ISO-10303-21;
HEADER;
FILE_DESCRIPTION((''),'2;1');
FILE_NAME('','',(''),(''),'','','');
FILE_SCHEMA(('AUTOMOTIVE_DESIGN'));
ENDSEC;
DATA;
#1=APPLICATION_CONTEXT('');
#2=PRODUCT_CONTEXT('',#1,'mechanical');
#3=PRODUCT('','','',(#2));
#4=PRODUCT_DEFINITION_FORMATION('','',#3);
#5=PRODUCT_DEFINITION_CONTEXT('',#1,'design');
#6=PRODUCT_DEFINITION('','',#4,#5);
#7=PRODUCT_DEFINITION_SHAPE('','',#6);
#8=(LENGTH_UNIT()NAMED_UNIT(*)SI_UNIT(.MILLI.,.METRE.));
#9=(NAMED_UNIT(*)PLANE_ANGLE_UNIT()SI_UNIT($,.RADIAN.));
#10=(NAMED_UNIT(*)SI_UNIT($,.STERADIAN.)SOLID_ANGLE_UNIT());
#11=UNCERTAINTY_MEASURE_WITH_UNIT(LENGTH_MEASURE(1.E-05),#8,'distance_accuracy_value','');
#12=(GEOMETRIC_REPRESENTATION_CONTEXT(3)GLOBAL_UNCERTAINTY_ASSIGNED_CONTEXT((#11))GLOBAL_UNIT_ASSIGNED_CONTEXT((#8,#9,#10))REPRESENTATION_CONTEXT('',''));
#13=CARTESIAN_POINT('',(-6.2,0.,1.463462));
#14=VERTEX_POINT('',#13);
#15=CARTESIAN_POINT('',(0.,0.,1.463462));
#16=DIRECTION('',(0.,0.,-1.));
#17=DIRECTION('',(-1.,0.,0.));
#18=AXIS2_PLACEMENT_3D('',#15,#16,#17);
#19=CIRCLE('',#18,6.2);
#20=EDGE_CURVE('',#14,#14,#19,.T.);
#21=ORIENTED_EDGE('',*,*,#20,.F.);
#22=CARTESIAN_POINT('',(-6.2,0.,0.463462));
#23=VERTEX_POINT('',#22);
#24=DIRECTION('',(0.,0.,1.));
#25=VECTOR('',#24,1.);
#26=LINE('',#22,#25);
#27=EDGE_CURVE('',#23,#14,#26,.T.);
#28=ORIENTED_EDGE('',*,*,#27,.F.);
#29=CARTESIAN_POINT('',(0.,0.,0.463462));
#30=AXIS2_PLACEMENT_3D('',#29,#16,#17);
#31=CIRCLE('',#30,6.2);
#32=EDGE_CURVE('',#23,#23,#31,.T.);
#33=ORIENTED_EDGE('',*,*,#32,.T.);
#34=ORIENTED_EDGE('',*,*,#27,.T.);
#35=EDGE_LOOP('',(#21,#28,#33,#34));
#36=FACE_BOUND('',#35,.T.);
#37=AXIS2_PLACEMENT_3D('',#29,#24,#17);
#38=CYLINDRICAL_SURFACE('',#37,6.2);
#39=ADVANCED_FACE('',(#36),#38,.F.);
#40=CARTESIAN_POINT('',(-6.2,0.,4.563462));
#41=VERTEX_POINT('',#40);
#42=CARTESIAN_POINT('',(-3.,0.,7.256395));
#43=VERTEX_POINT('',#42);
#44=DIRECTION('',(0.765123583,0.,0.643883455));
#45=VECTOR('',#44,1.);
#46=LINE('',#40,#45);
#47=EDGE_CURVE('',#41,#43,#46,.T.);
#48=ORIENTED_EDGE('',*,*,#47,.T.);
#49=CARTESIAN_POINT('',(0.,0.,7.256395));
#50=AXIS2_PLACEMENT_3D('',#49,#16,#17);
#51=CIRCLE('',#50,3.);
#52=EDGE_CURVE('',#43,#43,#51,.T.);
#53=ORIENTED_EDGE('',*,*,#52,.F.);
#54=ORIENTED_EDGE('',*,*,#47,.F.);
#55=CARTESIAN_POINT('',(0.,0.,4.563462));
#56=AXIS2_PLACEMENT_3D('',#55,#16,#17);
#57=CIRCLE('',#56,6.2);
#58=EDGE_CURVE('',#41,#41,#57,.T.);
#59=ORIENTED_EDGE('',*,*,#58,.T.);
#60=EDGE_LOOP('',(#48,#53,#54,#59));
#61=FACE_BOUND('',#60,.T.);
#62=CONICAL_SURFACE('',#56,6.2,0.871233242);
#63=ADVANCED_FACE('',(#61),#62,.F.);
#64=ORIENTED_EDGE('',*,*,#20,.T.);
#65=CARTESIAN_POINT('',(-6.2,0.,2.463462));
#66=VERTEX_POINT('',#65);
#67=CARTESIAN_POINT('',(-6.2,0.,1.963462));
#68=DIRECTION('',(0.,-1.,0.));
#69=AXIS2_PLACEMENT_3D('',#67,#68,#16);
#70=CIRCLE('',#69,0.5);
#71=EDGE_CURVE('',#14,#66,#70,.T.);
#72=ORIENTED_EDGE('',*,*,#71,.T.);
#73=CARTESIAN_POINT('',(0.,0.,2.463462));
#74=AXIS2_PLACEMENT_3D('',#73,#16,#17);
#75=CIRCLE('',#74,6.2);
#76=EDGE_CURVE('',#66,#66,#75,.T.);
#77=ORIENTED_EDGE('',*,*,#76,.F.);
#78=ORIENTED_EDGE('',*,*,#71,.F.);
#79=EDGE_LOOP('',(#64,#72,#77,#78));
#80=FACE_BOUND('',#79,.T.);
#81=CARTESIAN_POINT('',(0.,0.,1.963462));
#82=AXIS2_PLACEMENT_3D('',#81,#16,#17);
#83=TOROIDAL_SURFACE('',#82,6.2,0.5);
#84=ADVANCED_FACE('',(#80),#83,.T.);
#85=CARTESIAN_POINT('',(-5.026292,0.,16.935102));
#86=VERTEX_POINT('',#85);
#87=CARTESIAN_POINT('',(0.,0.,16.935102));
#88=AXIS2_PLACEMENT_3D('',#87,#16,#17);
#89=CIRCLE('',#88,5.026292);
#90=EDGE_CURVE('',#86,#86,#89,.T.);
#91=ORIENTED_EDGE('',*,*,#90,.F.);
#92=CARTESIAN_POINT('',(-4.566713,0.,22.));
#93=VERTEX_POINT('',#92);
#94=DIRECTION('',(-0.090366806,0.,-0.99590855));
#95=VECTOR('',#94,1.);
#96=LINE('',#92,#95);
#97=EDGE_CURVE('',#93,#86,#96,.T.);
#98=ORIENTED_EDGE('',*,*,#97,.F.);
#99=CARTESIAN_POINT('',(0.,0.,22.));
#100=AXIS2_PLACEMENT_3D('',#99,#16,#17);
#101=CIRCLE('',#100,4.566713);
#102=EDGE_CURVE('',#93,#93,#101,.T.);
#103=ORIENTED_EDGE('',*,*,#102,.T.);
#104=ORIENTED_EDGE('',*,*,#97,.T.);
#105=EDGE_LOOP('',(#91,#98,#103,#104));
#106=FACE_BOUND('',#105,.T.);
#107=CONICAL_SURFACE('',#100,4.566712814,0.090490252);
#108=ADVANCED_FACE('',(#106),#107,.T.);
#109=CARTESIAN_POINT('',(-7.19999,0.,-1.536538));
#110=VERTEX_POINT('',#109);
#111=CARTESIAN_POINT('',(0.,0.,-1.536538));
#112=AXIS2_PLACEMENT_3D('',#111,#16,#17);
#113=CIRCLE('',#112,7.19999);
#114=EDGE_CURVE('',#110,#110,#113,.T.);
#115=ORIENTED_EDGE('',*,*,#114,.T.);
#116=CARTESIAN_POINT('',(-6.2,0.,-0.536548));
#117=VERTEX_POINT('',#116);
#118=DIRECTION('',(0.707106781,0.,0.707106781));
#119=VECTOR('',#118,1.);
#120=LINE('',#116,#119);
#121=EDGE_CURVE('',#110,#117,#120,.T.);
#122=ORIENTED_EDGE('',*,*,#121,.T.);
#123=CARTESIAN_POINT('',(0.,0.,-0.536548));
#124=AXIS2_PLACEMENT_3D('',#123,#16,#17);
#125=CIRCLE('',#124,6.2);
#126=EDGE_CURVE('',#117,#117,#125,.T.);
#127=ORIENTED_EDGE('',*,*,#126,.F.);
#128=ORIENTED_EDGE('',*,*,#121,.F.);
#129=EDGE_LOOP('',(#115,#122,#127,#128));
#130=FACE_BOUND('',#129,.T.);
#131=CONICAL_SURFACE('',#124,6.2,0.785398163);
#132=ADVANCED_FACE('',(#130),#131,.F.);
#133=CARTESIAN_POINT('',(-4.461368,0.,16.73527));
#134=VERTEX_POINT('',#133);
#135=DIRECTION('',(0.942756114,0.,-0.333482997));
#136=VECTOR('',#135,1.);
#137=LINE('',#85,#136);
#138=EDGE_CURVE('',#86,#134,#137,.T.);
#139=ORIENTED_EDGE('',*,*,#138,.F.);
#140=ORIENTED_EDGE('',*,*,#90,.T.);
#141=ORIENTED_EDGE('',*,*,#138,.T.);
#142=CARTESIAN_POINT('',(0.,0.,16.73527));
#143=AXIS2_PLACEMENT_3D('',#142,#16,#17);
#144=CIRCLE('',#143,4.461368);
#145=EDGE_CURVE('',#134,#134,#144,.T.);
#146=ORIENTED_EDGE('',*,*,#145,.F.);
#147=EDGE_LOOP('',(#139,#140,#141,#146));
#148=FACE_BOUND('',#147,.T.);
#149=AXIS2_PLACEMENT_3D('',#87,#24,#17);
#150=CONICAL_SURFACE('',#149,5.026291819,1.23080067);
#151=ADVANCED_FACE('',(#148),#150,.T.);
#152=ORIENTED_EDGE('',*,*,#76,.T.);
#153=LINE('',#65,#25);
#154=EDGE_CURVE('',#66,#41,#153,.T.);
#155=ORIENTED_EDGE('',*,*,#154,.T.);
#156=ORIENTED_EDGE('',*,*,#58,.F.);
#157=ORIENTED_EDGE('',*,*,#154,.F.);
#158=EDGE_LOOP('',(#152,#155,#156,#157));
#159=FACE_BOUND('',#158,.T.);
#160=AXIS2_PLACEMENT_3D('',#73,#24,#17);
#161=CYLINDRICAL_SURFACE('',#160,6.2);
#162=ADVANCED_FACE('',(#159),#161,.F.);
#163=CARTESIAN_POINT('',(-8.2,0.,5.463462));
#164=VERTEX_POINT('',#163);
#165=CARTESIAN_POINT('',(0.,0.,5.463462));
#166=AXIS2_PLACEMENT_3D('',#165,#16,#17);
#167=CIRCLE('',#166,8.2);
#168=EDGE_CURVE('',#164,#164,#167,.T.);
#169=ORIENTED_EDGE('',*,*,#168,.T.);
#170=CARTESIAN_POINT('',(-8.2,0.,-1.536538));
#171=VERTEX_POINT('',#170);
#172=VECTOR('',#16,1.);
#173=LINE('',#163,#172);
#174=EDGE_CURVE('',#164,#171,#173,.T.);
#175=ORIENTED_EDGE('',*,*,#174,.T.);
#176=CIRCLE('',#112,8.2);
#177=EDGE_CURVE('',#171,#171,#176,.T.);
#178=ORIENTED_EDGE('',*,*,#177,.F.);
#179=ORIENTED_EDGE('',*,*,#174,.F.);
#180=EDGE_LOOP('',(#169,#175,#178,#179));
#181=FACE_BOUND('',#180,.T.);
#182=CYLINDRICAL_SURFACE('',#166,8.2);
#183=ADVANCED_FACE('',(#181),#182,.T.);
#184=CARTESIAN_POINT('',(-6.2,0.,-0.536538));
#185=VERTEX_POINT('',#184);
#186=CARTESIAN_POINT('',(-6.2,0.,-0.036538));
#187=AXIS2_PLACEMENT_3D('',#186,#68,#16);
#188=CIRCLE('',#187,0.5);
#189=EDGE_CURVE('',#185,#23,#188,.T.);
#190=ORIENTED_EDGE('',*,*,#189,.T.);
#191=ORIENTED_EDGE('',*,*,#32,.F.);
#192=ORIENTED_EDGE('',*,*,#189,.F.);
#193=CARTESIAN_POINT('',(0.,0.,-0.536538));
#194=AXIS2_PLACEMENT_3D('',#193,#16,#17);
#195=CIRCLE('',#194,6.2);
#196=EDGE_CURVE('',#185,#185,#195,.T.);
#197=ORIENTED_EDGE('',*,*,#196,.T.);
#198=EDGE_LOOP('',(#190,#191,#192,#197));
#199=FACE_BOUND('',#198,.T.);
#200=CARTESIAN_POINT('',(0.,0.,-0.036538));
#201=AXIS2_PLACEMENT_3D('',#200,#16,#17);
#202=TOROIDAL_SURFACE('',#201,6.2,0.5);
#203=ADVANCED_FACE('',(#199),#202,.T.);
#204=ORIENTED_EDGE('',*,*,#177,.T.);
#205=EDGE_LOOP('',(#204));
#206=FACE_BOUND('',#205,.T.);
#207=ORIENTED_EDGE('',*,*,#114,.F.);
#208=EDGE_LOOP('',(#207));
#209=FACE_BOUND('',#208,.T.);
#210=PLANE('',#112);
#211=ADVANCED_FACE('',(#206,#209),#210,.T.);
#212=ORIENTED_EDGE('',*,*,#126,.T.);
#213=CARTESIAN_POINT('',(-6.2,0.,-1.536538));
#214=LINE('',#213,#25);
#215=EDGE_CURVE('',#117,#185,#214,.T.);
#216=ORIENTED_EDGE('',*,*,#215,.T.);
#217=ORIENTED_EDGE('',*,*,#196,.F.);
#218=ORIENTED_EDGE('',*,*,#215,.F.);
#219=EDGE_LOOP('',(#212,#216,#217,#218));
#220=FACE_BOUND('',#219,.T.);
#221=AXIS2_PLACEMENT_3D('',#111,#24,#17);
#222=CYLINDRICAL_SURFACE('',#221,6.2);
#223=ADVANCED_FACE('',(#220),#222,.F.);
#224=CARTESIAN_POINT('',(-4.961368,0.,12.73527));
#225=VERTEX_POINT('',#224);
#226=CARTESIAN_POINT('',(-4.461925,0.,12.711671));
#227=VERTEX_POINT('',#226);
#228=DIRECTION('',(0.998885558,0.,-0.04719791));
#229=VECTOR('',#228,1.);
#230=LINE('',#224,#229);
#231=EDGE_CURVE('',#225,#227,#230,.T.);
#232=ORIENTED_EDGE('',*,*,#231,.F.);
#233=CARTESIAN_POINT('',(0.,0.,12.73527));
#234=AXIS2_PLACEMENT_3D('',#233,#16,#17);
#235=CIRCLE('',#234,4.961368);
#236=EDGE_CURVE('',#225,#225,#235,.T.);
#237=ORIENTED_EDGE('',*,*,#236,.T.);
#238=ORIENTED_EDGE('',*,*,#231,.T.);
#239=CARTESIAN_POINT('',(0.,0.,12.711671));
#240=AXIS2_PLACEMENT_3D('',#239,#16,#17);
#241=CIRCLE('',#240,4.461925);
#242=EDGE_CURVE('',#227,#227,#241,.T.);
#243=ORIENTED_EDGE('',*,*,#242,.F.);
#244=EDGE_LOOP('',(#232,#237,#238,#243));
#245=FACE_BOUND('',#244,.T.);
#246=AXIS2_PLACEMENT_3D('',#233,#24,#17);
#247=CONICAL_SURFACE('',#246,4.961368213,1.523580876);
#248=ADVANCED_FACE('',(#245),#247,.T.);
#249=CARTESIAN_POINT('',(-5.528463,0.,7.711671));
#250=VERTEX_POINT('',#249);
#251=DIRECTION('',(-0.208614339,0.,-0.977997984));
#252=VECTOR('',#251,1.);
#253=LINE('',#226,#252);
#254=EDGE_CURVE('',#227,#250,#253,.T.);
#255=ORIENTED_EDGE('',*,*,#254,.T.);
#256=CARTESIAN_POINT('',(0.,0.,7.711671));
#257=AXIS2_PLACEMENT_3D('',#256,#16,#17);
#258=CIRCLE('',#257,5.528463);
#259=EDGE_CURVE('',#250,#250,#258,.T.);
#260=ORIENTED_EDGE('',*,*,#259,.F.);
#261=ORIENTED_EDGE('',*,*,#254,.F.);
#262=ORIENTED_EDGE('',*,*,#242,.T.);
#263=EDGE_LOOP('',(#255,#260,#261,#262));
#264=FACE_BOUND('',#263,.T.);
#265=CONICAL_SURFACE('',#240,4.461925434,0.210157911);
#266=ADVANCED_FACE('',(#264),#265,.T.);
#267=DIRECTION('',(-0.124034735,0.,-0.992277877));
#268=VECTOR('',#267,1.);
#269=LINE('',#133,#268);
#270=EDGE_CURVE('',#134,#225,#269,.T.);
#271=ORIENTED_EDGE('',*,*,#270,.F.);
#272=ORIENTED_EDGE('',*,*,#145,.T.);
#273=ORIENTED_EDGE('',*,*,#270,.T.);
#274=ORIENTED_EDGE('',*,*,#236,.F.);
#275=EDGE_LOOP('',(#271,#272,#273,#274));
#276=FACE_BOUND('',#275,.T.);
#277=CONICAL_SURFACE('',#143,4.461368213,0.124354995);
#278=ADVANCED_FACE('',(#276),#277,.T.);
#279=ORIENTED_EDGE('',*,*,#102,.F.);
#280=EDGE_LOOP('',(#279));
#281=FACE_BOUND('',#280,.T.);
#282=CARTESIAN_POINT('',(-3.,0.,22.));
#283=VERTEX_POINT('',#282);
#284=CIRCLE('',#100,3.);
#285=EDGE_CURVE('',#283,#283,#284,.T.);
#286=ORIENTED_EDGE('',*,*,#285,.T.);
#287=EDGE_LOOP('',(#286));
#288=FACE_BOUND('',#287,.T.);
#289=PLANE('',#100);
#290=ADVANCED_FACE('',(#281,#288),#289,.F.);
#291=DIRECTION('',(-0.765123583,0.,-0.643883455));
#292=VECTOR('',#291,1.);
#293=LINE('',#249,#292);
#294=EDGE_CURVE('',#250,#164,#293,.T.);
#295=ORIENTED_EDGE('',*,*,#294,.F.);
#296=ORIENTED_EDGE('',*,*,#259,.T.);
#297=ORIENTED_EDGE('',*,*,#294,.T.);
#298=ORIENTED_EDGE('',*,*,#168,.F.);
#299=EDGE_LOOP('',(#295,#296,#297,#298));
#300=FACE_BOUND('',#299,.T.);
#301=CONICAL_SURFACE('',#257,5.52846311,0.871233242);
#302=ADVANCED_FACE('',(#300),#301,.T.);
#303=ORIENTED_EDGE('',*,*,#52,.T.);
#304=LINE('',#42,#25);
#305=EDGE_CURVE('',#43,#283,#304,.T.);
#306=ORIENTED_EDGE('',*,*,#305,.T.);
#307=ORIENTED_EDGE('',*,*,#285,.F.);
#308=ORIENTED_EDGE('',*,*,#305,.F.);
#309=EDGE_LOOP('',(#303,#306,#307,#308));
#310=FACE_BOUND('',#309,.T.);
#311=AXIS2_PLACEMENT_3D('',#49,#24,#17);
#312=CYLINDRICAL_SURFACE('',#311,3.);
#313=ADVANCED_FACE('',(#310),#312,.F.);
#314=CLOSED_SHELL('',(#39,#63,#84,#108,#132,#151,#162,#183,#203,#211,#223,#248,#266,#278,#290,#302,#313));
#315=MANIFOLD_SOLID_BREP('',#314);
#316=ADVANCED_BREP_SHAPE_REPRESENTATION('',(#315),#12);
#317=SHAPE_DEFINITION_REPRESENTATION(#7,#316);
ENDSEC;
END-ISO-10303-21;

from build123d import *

# Parameters (mm, degrees)
F2_SIZE = 0.99999


# Not quite as in the source:
# - a fillet or chamfer is up to 0.001 mm smaller than in the source, because OpenCascade refuses the exact size


with BuildPart() as f1:
    # F0 (on Front) → F1 (revolve)
    with BuildSketch(Plane.XZ):
        with BuildLine():
            Line((-8.2, -1.5365384456), (-6.2, -1.5365384456))
            Line((-6.2, -1.5365384456), (-6.2, -0.5365384456))
            ThreePointArc((-6.2, -0.5365384456), (-5.7, -0.0365384456), (-6.2, 0.4634615544))
            Line((-6.2, 0.4634615544), (-6.2, 1.4634615544))
            ThreePointArc((-6.2, 1.4634615544), (-5.7, 1.9634615544), (-6.2, 2.4634615544))
            Line((-6.2, 2.4634615544), (-6.2, 4.5634615544))
            Line((-6.2, 4.5634615544), (-3, 7.2563952203))
            Line((-3, 7.2563952203), (-3, 22))
            Line((-3, 22), (-4.566712814, 22))
            Line((-4.566712814, 22), (-5.0262918188, 16.9351019463))
            Line((-5.0262918188, 16.9351019463), (-4.4613682133, 16.7352703944))
            Line((-4.4613682133, 16.7352703944), (-4.9613682133, 12.7352703944))
            Line((-4.9613682133, 12.7352703944), (-4.4619254344, 12.7116714393))
            Line((-4.4619254344, 12.7116714393), (-5.5284631097, 7.7116714393))
            Line((-5.5284631097, 7.7116714393), (-8.2, 5.4634615544))
            Line((-8.2, 5.4634615544), (-8.2, -1.5365384456))
        make_face()
    revolve(axis=Axis((0, 0, 11), (0, 0, -1)))

    # F2 (size 1 in the source; OpenCascade refuses exactly that, so slightly less here)
    f2_edges = [f1.edges().sort_by_distance(p)[0] for p in [
        (6.2, 0, -1.536538),
    ]]
    chamfer(f2_edges, length=F2_SIZE)


solid = f1.part
